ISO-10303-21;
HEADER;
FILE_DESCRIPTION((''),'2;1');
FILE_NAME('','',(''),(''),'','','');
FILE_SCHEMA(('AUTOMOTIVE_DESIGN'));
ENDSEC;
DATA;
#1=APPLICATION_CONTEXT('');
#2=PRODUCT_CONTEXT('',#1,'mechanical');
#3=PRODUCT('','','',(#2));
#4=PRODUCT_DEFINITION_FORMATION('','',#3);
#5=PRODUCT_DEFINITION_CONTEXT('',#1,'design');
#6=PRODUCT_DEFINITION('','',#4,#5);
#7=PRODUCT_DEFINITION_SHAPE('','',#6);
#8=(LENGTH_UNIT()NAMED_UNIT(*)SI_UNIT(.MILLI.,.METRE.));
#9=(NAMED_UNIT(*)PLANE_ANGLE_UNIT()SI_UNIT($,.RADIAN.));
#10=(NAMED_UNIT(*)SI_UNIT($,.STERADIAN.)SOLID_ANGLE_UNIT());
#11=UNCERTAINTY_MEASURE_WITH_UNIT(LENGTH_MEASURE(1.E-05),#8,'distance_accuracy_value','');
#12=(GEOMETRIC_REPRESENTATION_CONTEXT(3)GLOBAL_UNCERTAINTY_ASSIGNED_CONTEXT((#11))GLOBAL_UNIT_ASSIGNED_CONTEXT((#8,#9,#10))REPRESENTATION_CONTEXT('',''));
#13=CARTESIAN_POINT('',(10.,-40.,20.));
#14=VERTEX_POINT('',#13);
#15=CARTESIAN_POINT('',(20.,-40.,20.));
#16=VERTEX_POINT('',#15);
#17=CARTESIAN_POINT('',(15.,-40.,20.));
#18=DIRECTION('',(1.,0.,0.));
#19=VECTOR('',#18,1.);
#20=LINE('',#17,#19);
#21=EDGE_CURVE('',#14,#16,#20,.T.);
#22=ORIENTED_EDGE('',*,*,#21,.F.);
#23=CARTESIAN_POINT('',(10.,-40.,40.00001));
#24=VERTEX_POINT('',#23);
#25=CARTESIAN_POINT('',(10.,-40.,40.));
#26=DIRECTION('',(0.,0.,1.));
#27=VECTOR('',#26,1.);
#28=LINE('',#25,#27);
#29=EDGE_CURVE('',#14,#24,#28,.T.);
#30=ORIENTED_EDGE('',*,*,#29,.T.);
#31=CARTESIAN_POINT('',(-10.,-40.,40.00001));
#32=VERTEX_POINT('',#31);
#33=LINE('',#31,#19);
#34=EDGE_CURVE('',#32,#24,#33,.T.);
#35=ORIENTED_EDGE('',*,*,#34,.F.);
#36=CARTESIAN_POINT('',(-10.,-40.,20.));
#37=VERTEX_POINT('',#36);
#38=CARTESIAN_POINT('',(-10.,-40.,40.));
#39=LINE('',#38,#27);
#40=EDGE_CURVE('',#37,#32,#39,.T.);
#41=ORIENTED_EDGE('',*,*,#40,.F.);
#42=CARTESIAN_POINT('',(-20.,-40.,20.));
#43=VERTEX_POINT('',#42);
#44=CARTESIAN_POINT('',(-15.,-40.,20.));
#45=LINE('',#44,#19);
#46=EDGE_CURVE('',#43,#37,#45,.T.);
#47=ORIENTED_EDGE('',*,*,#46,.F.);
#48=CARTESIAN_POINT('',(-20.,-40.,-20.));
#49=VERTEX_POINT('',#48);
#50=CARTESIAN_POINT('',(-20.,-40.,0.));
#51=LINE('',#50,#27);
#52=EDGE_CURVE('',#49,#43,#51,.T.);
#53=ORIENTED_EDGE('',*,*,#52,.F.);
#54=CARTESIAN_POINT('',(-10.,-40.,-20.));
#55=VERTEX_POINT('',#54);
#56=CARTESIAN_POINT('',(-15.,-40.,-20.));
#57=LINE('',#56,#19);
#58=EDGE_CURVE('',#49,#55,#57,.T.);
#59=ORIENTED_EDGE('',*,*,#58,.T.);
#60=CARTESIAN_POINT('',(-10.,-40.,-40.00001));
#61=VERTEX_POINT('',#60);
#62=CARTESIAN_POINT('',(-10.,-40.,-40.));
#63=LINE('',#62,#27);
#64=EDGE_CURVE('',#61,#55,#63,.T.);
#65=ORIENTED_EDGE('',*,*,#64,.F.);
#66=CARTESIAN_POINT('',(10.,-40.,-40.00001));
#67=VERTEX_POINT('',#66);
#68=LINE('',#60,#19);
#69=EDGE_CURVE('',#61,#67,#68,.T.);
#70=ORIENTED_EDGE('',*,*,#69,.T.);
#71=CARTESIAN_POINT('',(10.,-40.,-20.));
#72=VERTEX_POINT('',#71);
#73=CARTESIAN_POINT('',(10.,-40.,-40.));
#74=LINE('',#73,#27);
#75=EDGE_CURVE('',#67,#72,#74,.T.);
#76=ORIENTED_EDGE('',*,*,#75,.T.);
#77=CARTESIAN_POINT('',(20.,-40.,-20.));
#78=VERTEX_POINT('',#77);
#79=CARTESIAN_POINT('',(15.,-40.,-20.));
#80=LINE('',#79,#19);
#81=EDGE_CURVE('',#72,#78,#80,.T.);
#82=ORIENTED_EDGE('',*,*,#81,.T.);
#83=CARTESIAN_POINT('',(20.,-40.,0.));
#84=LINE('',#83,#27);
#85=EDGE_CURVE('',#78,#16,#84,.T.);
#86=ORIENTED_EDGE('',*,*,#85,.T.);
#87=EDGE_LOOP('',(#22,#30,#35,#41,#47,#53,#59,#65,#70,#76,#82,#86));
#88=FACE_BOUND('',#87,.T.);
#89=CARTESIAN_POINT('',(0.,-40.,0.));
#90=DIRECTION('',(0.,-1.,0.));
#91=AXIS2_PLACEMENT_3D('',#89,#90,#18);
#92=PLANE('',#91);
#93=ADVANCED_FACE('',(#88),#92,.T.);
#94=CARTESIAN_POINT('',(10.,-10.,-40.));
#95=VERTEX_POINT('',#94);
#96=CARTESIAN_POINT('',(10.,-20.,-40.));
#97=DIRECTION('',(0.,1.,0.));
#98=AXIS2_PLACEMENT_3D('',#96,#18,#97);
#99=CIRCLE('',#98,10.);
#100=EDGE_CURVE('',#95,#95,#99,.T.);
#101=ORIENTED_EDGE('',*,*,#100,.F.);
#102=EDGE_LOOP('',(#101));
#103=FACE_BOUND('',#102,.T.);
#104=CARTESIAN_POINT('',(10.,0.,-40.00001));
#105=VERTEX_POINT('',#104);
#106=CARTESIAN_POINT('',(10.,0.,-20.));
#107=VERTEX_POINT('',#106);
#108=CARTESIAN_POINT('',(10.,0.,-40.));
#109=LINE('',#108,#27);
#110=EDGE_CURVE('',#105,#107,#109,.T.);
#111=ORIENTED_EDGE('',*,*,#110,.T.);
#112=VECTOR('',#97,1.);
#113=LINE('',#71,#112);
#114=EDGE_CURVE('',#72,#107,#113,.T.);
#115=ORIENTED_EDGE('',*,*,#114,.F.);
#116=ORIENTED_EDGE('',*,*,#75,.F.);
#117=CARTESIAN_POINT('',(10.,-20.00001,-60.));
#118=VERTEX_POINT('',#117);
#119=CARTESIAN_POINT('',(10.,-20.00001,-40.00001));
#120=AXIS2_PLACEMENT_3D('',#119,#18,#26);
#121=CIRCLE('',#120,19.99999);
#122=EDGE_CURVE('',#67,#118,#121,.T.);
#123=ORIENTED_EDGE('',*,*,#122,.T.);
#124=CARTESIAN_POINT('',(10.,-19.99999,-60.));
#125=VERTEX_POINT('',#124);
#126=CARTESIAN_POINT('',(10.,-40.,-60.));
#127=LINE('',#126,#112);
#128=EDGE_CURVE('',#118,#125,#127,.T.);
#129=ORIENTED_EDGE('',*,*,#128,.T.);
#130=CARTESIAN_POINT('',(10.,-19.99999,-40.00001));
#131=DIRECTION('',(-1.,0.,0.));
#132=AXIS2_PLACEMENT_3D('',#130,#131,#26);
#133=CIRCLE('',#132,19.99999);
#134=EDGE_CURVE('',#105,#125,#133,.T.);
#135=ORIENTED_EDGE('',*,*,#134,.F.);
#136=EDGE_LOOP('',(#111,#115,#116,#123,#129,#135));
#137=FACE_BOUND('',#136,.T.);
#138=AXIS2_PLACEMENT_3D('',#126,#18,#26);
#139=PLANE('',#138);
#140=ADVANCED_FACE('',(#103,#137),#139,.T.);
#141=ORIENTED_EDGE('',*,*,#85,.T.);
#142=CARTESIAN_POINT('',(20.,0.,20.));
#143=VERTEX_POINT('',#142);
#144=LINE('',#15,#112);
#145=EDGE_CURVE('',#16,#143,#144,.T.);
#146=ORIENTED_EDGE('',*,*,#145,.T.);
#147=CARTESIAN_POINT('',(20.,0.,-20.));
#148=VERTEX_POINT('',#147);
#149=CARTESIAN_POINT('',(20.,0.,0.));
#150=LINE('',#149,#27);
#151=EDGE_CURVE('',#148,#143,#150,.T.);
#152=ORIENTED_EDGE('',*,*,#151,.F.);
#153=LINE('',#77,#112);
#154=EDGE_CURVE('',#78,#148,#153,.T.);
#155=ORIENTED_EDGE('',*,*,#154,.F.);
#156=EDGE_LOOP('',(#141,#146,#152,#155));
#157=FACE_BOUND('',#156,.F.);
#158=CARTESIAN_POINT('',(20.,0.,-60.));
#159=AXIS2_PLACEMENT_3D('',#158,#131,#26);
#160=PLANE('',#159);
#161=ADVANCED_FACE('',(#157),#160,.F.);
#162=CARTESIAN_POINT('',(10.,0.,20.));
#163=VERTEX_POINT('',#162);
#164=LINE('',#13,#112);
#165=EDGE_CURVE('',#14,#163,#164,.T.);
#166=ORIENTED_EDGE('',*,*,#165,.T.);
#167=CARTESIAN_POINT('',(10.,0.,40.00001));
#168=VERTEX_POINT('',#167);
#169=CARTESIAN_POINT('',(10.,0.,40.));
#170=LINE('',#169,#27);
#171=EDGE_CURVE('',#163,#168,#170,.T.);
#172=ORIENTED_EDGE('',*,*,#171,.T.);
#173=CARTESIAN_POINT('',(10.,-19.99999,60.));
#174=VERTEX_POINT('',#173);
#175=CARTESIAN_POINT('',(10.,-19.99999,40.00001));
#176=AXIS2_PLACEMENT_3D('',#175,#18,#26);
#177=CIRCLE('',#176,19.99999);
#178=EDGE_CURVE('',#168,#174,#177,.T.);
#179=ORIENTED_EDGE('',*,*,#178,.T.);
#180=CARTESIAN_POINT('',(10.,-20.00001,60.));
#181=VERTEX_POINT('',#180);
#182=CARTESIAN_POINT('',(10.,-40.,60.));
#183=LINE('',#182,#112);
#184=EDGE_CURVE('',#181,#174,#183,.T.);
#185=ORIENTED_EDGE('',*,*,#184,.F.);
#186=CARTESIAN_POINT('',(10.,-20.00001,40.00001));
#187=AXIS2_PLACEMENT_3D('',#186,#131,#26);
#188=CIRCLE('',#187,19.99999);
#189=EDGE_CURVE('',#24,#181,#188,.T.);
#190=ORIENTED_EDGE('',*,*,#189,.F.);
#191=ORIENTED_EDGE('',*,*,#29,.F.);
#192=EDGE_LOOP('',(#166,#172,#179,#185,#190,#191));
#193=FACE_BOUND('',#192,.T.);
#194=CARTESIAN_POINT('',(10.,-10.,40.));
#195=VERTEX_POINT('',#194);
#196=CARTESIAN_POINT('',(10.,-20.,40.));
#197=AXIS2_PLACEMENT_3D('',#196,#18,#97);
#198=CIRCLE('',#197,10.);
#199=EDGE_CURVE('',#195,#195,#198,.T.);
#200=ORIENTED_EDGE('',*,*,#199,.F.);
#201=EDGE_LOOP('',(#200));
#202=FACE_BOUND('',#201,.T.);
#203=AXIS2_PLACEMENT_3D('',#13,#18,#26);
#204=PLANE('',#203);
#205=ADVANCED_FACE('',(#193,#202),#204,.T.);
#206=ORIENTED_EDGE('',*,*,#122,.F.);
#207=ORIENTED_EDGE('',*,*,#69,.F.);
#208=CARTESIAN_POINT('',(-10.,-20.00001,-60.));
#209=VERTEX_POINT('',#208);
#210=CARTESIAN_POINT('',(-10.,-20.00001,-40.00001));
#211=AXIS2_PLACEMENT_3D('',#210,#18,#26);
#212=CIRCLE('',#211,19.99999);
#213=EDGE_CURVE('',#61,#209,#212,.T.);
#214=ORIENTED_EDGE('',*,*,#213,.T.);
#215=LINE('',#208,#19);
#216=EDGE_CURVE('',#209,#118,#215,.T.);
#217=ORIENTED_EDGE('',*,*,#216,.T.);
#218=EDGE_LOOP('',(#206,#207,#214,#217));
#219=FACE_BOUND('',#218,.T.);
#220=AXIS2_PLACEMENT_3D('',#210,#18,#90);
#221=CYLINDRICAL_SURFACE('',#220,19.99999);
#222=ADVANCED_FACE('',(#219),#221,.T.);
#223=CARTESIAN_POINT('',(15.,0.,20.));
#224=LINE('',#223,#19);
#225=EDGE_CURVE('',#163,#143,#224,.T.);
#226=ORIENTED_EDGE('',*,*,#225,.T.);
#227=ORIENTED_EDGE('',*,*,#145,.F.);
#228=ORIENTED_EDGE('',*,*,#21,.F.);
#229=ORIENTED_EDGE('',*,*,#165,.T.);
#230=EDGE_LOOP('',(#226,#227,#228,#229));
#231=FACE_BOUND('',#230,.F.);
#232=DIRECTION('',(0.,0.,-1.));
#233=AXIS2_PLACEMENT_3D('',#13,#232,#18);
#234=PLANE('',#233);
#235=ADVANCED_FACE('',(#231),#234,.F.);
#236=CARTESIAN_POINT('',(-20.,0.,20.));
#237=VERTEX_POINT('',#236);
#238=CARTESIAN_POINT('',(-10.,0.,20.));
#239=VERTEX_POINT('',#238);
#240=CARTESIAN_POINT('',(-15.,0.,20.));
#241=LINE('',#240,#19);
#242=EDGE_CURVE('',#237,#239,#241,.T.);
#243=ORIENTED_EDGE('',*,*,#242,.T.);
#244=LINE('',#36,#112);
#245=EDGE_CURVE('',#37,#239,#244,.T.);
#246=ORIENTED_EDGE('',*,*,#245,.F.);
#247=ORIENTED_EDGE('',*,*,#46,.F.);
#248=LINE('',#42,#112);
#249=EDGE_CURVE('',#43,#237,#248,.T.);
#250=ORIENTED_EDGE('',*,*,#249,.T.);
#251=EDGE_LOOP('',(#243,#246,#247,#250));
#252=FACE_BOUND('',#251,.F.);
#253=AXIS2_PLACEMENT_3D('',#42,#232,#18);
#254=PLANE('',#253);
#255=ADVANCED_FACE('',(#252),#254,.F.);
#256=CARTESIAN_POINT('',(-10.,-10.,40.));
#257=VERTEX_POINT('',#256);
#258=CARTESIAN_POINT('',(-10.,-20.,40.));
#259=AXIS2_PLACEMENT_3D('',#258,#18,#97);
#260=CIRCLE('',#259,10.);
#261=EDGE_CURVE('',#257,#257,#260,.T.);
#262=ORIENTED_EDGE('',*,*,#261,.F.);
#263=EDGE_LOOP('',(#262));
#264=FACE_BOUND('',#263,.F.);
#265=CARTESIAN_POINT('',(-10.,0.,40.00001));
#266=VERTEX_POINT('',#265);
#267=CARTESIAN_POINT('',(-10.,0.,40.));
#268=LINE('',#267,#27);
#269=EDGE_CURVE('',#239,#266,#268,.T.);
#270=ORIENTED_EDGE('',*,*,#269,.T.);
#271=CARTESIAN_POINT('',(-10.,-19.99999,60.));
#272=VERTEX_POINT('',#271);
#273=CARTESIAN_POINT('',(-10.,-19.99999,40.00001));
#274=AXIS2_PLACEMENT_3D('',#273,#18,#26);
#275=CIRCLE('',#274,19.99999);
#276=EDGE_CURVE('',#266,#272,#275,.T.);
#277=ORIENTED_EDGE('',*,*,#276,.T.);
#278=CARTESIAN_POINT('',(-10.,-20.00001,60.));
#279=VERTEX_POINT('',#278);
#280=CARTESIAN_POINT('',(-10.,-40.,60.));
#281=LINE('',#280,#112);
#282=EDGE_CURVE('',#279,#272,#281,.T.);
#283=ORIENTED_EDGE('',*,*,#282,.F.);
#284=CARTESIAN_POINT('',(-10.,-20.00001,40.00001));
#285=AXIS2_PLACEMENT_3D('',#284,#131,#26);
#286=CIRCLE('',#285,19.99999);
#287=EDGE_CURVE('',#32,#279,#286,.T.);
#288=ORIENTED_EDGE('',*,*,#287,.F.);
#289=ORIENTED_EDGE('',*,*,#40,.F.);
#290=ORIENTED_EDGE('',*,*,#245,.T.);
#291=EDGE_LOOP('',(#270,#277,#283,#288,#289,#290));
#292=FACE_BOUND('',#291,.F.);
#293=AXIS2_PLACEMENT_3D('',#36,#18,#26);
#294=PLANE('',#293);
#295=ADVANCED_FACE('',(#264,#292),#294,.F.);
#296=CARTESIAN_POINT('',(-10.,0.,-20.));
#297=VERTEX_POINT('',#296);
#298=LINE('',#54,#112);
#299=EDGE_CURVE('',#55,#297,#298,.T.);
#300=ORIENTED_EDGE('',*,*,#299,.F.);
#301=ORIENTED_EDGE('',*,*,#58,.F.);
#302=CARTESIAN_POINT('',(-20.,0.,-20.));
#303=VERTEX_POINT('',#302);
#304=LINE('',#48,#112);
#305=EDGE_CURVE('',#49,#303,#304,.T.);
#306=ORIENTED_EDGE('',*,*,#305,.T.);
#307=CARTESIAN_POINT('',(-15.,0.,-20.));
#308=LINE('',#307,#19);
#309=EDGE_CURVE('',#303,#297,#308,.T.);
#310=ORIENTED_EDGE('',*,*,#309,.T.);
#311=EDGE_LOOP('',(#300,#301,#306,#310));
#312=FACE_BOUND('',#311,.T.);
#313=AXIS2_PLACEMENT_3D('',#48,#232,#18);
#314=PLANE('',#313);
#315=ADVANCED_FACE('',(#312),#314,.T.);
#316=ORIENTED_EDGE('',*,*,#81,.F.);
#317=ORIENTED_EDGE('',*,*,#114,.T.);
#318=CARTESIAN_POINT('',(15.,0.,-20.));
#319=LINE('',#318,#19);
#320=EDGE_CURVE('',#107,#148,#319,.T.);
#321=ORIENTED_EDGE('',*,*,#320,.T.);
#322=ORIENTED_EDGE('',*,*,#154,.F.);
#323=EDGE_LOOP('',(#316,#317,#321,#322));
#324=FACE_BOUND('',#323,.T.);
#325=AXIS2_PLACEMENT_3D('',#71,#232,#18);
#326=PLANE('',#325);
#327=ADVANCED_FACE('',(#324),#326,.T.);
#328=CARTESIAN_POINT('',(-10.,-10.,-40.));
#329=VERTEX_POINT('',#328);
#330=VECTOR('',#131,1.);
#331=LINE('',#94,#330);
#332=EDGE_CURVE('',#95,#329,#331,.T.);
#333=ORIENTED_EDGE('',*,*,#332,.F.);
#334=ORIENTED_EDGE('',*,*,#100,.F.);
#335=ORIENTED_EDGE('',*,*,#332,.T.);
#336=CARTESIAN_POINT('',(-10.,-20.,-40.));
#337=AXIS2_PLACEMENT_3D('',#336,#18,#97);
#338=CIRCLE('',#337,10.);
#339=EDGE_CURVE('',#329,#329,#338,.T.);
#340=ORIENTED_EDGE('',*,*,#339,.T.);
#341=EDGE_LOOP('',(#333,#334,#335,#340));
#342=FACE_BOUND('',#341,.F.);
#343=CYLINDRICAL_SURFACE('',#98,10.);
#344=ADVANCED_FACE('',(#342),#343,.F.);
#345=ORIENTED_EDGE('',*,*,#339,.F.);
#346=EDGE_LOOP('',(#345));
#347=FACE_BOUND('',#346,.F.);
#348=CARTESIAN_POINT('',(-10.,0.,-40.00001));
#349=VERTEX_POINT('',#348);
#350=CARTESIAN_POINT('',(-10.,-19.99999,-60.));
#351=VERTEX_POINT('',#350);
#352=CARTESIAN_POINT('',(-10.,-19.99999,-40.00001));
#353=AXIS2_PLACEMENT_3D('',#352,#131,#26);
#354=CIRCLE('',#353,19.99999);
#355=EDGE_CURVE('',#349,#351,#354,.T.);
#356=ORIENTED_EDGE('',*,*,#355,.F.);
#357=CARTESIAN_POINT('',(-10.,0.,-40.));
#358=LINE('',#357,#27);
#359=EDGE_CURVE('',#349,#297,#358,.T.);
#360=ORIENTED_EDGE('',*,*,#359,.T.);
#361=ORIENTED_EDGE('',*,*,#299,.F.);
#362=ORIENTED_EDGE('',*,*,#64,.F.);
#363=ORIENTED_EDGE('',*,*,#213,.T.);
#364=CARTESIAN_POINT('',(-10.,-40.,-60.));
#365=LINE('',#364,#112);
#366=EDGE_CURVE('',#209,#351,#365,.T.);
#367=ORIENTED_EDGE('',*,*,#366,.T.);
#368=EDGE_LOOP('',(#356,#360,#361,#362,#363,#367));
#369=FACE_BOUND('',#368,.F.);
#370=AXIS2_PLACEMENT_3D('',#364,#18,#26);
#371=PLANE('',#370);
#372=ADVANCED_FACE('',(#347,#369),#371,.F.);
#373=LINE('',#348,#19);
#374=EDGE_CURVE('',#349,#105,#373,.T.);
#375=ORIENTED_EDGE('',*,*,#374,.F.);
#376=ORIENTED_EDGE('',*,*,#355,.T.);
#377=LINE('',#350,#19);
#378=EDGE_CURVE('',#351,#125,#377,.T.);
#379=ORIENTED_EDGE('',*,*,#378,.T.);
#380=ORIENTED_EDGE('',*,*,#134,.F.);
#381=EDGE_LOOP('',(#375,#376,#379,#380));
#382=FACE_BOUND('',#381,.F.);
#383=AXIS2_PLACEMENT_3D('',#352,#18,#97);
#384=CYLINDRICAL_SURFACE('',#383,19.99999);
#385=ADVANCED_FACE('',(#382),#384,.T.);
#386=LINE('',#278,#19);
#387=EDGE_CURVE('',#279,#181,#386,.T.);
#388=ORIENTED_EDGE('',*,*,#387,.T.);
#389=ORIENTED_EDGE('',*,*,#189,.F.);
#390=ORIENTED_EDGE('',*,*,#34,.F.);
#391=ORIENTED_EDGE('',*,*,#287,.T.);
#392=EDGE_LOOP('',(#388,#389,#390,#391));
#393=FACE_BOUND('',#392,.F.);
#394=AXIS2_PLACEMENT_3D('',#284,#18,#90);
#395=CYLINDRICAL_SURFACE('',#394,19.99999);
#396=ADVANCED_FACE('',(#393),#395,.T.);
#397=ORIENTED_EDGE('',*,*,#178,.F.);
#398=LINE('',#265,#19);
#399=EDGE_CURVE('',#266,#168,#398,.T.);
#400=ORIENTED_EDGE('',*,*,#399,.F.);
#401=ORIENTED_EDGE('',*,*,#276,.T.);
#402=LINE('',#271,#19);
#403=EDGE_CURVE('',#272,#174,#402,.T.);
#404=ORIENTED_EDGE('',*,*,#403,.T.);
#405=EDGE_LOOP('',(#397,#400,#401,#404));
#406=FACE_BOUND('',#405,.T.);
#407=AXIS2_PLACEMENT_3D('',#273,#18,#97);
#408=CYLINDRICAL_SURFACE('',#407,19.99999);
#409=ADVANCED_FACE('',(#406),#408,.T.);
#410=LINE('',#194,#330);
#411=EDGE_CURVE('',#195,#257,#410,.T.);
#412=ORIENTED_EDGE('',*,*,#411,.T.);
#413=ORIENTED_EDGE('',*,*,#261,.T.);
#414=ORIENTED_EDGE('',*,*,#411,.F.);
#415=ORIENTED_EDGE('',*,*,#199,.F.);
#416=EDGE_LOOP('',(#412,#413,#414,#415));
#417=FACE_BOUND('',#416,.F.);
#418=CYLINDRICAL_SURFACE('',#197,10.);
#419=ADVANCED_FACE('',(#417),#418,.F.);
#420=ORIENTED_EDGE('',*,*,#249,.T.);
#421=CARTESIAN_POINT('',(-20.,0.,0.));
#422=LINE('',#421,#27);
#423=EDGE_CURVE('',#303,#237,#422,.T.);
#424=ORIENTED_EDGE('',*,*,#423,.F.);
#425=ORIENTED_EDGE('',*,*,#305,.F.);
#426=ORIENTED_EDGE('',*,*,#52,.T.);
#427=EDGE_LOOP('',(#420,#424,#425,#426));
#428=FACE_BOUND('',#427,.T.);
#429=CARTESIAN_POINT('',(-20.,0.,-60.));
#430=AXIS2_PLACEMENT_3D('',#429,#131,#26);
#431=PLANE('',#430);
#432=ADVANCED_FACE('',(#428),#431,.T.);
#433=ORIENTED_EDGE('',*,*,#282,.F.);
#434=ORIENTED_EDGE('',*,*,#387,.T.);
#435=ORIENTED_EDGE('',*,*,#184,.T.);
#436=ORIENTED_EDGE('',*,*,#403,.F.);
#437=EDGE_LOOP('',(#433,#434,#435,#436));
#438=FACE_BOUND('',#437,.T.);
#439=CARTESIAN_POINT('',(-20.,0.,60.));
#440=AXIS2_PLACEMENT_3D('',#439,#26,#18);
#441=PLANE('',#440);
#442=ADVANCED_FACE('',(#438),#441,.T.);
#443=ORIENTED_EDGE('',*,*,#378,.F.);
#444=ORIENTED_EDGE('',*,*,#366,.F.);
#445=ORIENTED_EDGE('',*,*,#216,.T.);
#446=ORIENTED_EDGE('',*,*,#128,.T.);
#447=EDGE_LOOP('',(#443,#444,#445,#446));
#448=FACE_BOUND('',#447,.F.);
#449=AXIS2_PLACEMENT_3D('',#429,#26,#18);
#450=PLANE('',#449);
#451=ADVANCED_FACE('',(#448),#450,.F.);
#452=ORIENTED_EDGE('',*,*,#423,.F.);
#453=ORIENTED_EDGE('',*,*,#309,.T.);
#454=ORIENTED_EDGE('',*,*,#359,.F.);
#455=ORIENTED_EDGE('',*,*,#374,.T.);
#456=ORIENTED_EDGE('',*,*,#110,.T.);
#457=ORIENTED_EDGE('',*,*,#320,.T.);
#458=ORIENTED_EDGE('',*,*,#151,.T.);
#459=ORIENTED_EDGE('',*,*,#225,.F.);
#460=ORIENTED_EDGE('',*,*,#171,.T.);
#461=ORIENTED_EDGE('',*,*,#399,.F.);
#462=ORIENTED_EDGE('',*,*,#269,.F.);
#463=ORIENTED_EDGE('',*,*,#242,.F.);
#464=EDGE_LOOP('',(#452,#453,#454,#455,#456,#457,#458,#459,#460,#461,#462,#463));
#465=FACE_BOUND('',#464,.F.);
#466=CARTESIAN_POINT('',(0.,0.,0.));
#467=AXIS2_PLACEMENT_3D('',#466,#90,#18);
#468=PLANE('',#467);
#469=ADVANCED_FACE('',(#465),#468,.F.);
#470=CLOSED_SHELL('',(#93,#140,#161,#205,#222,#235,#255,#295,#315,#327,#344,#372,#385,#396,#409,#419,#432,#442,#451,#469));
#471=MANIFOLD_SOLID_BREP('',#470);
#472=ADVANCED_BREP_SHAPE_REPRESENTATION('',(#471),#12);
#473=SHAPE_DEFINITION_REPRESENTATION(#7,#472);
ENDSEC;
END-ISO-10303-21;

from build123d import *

# Parameters (mm, degrees)
F0_W      = 40
F0_H      = 120
F1_DEPTH  = 40
F2_W      = 10
F2_H      = 40
F3_DEPTH  = 40
F4_W      = 10
F4_H      = 40
F5_DEPTH  = 40
F6_W      = 10
F6_H      = 40
F7_DEPTH  = 40
F8_R      = 10
F9_DEPTH  = 25
F10_R     = 10
F11_DEPTH = 25
F12_R     = 19.99999


# Not quite as in the source:
# - a fillet or chamfer is up to 0.001 mm smaller than in the source, because OpenCascade refuses the exact size


with BuildPart() as f1:
    # F0 (on Front) → F1 (new body)
    with BuildSketch(Plane.XZ):
        Rectangle(F0_W, F0_H)
    extrude(amount=F1_DEPTH)

    # F2 (on face) → F3 (cut)
    with BuildSketch(Plane.XZ.offset(40)):
        with Locations((-15, 40)):
            Rectangle(F2_W, F2_H)
    extrude(amount=-F3_DEPTH, mode=Mode.SUBTRACT)

    # F4 (on face) → F5 (cut)
    with BuildSketch(Plane.XZ.offset(40)):
        with Locations((15, 40)):
            Rectangle(F4_W, F4_H)
    extrude(amount=-F5_DEPTH, mode=Mode.SUBTRACT)

    # F6 (on face) → F7 (cut)
    with BuildSketch(Plane.XZ.offset(40)):
        with Locations((-15, -40)):
            Rectangle(F6_W, F6_H)
        with Locations((15, -40)):
            Rectangle(F6_W, F6_H)
    extrude(amount=-F7_DEPTH, mode=Mode.SUBTRACT)

    # F8 (on face) → F9 (cut)
    with BuildSketch(Plane.YZ.offset(10)):
        with Locations((-20, 40)):
            Circle(F8_R)
    extrude(amount=-F9_DEPTH, mode=Mode.SUBTRACT)

    # F10 (on face) → F11 (cut)
    with BuildSketch(Plane.YZ.offset(10)):
        with Locations((-20, -40)):
            Circle(F10_R)
    extrude(amount=-F11_DEPTH, mode=Mode.SUBTRACT)

    # F12 (radius 20 in the source; OpenCascade refuses exactly that, so slightly less here)
    f12_edges = [f1.edges().sort_by_distance(p)[0] for p in [
        (0, -40, 60),
        (0, 0, 60),
        (0, -40, -60),
        (0, 0, -60),
    ]]
    fillet(f12_edges, radius=F12_R)


solid = f1.part
